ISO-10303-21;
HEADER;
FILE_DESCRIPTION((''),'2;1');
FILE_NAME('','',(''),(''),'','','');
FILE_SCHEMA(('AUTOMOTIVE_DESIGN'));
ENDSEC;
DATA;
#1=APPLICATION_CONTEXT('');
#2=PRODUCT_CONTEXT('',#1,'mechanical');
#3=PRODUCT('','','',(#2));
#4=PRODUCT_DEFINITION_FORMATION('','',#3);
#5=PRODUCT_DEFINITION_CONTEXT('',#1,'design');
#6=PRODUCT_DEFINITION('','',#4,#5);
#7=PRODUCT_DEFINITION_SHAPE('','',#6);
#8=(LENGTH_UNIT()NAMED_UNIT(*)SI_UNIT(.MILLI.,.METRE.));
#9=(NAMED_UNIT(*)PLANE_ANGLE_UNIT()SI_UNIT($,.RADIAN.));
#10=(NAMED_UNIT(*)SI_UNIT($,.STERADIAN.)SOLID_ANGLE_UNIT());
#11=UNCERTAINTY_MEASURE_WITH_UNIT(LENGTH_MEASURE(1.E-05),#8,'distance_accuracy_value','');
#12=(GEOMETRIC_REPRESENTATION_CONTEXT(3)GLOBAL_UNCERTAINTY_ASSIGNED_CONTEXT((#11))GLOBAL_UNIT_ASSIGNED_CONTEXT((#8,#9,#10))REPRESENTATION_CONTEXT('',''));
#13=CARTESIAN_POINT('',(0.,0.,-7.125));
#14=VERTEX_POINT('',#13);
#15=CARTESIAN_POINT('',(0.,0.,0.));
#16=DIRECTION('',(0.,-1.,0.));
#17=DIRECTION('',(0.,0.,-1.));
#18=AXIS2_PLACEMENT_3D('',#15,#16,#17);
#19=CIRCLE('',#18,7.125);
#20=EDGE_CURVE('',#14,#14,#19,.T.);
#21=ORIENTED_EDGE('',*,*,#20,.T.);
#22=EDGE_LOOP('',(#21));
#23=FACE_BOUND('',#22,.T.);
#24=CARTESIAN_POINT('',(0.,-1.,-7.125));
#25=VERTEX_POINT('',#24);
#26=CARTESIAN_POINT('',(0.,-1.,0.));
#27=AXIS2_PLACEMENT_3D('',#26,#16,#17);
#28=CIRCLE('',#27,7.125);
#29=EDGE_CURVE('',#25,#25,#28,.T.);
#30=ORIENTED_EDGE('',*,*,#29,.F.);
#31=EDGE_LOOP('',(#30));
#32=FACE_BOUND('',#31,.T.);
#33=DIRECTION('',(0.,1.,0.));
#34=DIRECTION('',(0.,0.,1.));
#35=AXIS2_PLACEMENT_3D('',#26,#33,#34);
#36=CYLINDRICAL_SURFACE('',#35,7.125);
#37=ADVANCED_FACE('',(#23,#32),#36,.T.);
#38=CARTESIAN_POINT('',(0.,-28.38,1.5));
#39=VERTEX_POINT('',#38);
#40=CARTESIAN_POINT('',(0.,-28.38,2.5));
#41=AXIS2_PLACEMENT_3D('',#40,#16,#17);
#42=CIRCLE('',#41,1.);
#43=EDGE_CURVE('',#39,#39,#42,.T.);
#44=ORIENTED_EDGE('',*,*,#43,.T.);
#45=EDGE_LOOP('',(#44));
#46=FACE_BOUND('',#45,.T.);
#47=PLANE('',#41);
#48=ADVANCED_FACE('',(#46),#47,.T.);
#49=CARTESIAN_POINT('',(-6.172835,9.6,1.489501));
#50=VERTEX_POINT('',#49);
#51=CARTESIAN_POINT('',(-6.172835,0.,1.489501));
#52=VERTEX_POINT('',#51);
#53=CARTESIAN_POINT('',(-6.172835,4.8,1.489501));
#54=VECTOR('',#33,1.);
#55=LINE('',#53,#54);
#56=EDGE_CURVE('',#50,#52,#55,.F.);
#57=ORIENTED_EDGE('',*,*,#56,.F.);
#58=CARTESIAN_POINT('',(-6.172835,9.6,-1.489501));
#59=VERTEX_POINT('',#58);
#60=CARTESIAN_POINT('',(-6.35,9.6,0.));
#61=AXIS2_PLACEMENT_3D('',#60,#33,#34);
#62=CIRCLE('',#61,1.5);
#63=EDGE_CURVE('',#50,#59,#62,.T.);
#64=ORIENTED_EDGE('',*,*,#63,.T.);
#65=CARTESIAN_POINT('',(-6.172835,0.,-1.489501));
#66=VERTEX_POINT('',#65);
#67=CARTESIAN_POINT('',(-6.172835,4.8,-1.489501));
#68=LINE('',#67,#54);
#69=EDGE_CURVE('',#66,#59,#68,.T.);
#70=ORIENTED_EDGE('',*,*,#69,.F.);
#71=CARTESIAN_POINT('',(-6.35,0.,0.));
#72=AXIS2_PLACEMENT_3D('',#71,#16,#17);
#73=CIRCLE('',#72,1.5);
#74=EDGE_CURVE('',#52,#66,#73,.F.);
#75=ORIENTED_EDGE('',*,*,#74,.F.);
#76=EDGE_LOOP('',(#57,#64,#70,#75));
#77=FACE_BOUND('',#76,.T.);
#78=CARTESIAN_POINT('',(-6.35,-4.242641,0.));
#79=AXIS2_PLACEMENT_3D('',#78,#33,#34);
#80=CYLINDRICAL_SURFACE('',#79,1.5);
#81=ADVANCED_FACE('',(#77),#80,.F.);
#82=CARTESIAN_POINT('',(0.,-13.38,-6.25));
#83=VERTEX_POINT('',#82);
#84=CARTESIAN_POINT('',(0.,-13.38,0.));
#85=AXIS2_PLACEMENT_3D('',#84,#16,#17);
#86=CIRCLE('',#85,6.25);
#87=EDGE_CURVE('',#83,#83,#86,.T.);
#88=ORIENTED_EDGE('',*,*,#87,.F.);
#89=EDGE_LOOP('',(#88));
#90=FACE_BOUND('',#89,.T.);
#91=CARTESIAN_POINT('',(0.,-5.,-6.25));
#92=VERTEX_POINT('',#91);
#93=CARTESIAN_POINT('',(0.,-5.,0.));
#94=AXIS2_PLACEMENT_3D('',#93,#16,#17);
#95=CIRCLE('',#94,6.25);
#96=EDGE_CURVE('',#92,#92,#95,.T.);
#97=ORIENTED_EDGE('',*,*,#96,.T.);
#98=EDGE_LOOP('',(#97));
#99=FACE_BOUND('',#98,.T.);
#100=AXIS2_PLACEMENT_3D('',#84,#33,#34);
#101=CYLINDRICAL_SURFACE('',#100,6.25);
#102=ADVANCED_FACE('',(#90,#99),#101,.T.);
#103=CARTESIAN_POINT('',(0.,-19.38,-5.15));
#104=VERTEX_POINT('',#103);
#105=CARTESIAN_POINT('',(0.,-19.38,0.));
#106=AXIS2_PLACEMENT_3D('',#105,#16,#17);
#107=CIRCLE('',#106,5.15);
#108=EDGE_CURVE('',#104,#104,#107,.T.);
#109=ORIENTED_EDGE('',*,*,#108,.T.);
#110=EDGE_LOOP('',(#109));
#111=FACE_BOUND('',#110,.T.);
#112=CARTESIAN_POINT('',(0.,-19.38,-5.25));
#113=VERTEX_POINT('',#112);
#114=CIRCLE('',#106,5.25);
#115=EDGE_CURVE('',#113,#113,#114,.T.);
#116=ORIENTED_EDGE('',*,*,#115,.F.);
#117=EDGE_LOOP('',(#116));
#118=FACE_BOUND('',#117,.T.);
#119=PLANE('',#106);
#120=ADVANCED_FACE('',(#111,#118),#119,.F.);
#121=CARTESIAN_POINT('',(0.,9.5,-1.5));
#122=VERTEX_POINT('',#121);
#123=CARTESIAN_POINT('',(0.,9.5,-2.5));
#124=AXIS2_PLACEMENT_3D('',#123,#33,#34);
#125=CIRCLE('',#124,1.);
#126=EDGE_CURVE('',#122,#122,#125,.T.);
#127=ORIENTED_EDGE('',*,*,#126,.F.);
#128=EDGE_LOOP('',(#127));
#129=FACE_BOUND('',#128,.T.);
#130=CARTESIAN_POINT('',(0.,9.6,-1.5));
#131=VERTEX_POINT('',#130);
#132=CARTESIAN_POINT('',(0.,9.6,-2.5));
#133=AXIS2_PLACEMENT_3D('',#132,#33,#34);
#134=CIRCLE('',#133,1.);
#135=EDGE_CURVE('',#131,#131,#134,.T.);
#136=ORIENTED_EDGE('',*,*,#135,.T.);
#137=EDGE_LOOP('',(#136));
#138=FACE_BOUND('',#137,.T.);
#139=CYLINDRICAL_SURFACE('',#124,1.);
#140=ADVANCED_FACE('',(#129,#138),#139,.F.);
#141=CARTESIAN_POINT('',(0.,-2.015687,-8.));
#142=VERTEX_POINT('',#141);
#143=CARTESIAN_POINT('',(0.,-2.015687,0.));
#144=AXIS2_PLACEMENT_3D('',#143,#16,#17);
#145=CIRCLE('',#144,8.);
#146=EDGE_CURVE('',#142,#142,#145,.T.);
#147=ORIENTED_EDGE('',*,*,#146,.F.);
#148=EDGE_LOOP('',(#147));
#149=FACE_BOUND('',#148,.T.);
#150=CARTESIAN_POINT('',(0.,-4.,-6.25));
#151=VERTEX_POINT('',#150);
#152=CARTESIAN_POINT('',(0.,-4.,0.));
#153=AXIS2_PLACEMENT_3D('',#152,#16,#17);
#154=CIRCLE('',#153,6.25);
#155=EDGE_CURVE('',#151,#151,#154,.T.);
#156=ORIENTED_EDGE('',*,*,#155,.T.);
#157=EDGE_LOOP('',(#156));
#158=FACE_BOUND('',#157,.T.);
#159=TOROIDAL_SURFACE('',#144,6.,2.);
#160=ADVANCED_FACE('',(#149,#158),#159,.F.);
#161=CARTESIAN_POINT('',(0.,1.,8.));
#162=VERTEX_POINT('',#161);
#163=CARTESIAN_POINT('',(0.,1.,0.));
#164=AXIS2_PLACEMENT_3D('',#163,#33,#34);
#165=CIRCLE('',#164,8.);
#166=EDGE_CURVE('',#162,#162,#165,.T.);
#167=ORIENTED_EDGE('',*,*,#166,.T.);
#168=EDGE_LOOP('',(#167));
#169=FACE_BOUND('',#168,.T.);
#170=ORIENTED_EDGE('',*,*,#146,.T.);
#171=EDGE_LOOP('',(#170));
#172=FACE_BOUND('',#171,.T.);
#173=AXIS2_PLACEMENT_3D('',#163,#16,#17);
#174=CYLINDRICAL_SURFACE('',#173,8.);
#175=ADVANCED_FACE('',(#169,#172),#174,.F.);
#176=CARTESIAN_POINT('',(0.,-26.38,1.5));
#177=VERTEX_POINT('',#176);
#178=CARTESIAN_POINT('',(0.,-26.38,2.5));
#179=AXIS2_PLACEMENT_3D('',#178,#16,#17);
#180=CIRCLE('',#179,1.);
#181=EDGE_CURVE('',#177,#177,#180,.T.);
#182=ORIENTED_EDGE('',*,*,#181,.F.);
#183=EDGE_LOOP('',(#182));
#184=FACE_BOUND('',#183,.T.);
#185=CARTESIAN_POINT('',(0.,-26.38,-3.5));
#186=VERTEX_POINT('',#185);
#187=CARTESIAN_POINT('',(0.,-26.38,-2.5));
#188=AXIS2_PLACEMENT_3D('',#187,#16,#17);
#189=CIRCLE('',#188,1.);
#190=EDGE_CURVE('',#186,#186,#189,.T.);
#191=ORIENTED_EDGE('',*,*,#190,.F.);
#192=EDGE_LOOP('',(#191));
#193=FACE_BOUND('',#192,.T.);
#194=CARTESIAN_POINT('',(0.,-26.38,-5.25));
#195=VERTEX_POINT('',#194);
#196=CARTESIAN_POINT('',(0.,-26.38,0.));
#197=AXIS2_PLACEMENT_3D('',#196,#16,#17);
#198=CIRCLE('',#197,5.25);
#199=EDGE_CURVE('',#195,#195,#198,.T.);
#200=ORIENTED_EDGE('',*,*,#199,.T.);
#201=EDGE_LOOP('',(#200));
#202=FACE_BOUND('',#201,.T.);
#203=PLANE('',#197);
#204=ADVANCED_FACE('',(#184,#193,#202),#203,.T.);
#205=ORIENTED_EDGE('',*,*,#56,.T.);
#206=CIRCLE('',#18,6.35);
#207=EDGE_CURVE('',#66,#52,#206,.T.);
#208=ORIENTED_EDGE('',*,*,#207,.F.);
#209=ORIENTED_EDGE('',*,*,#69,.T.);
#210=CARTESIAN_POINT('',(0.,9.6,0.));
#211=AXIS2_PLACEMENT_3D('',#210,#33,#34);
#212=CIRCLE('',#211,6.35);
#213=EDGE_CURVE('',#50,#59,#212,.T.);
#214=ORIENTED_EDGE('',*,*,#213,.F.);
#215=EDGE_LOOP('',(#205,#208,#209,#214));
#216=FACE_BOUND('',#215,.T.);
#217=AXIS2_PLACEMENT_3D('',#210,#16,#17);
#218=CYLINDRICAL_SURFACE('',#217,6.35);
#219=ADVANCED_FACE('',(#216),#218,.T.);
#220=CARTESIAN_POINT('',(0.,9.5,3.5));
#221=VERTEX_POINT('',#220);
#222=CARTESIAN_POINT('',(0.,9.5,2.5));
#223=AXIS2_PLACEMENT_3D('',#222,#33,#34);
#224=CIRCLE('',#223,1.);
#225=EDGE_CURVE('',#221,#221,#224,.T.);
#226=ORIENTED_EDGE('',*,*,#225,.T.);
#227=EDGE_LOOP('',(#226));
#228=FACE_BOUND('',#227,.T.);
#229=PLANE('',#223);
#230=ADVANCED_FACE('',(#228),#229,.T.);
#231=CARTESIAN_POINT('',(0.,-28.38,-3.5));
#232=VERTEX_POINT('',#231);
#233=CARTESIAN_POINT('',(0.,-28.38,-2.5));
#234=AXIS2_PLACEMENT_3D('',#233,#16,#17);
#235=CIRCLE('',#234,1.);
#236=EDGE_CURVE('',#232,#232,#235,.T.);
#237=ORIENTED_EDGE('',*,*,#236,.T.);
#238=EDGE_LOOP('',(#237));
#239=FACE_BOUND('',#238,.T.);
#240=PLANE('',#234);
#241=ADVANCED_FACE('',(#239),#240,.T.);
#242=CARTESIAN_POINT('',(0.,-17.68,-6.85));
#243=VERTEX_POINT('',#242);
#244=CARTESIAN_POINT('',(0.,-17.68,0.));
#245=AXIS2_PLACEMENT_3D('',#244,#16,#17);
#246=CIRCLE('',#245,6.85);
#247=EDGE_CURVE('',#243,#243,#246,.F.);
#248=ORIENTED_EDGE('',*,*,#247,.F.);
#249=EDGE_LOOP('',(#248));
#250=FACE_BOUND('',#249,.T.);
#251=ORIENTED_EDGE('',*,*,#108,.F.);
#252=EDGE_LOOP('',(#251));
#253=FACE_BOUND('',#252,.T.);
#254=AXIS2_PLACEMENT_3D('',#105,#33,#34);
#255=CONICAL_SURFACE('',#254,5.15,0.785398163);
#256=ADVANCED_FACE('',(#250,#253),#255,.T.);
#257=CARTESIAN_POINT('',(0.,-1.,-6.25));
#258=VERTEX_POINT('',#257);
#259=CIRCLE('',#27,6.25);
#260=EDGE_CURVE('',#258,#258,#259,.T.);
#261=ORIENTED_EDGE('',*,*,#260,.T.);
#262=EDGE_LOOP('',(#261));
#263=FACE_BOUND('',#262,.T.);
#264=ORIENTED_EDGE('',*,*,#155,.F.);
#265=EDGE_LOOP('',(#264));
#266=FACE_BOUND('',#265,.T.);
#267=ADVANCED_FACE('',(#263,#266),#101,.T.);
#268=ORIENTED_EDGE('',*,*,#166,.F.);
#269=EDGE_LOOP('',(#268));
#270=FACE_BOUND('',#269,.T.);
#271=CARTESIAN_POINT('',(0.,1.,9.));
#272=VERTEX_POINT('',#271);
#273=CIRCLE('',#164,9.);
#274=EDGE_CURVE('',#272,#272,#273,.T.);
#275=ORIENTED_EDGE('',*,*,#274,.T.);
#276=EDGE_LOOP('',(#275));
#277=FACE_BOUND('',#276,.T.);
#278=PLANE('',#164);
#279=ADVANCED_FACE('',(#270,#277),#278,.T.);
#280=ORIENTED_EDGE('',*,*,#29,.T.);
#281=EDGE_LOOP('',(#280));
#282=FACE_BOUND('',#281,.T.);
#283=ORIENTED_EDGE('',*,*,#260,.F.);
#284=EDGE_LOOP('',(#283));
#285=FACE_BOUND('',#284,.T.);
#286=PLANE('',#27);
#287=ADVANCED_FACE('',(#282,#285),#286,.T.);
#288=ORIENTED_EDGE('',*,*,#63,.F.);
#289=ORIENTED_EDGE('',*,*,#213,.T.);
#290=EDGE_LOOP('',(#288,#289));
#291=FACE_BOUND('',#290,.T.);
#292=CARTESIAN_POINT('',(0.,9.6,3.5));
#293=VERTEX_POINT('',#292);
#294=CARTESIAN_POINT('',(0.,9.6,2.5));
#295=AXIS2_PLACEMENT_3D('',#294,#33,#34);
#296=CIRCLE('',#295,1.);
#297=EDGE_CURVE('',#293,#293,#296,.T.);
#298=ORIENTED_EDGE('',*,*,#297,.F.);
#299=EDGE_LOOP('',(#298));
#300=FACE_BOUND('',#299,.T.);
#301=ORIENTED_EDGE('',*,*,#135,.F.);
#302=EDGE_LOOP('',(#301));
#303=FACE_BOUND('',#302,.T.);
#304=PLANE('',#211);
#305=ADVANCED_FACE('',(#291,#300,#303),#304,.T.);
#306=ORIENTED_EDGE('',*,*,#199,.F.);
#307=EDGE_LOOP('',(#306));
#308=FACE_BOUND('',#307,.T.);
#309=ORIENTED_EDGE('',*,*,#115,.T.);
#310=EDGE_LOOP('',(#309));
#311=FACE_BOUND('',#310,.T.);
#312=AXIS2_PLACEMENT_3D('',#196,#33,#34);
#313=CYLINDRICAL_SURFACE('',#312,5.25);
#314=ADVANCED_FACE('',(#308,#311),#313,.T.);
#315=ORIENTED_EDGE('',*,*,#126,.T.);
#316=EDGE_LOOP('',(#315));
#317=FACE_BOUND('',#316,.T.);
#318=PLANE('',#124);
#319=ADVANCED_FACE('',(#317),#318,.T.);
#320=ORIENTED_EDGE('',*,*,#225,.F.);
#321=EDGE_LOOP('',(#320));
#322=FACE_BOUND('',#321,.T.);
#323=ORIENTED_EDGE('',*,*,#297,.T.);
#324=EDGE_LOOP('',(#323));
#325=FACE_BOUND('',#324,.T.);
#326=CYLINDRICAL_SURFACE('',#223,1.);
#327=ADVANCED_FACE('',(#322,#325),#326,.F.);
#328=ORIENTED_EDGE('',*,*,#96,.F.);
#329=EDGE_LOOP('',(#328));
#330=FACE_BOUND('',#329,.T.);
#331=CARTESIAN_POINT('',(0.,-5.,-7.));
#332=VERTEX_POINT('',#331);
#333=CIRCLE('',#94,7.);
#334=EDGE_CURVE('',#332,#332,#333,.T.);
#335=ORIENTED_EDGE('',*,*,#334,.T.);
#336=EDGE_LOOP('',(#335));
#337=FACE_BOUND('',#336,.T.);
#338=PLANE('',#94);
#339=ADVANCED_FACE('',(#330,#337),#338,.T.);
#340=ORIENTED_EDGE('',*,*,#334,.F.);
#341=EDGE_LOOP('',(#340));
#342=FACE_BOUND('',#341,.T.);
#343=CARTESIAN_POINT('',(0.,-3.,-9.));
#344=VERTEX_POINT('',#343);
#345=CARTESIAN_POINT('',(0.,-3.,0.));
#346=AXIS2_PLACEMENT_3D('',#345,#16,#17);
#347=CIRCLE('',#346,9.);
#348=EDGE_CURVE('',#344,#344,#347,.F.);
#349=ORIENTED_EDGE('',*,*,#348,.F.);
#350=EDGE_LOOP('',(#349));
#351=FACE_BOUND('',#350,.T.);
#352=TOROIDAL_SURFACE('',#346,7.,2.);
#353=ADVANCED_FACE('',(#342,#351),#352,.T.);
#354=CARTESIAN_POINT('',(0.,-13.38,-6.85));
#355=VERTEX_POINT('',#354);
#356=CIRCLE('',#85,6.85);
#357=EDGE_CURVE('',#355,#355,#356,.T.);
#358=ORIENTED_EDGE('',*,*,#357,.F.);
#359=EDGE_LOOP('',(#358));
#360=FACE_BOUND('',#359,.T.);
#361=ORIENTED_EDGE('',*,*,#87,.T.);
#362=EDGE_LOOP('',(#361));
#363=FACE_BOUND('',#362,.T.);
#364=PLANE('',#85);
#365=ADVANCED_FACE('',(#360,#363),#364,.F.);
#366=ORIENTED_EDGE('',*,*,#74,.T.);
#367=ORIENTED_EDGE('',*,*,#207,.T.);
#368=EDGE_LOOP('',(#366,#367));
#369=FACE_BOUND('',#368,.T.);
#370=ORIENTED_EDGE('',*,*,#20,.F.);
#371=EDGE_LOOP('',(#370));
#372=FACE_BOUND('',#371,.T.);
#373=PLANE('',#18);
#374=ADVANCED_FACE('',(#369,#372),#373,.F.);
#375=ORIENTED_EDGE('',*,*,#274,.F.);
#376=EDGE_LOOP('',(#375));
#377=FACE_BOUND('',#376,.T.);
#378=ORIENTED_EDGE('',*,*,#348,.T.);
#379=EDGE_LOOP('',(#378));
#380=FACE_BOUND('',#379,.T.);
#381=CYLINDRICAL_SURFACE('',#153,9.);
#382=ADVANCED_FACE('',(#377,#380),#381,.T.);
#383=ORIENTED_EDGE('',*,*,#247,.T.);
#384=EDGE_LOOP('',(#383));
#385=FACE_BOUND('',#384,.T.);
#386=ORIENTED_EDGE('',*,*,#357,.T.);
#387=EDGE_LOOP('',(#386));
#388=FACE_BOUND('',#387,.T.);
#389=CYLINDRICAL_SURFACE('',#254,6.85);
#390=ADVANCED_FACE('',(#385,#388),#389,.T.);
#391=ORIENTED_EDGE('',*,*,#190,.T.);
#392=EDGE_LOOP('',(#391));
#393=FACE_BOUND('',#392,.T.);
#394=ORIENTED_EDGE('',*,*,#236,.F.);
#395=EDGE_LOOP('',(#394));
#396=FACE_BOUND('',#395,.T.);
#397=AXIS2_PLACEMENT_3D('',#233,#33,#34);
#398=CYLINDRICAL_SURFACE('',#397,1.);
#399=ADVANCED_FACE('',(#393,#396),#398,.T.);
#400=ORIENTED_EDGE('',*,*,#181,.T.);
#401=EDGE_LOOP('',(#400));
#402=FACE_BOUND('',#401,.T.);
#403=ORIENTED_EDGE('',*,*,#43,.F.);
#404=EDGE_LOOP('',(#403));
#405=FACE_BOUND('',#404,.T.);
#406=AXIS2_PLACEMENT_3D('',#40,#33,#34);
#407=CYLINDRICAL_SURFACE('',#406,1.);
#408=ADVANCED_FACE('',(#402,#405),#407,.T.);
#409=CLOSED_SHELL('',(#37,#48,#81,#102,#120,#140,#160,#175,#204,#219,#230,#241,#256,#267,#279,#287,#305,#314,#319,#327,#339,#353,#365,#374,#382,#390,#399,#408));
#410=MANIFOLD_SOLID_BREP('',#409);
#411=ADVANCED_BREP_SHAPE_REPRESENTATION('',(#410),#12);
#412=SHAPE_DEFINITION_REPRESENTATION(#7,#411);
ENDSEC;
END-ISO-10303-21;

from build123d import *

# Parameters (mm, degrees)
SKETCH_1_R          = 6.35
EXTRUDE_1_DEPTH     = 9.6
SKETCH_2_R          = 7.125
EXTRUDE_2_DEPTH     = 1
SKETCH_3_R          = 6.25
EXTRUDE_3_DEPTH     = 12.38
SKETCH_4_R          = 6.85
EXTRUDE_4_DEPTH     = 6
CHAMFER_1_SIZE      = 1.7
SKETCH_5_R          = 5.25
EXTRUDE_5_DEPTH     = 7
SKETCH_6_R          = 9
EXTRUDE_6_DEPTH     = 1
SKETCH_7_R          = 9
SKETCH_7_R_2        = 8
EXTRUDE_7_DEPTH     = 5
FILLET_1_R          = 2
SKETCH_8_R          = 1
EXTRUDE_8_DEPTH     = 2
SKETCH_9_R          = 1.5
CUT_EXTRUDE_1_DEPTH = 9.6
SKETCH_10_R         = 1
CUT_EXTRUDE_2_DEPTH = 0.1


with BuildPart() as part:
    # 草图1 → 凸台-拉伸1 (new body)
    with BuildSketch(Plane(origin=(0, 0, 0), x_dir=(1, 0, 0), z_dir=(0, 1, 0))):
        with Locations(Location((0, 0, 0), (0, 0, 270))):
            Circle(SKETCH_1_R)
    extrude(amount=EXTRUDE_1_DEPTH)

    # 草图2 → 凸台-拉伸2 (add)
    with BuildSketch(Plane(origin=(0, 0, 0), x_dir=(-1, 0, 0), z_dir=(0, -1, 0))):
        with Locations(Location((0, 0, 0), (0, 0, 90))):
            Circle(SKETCH_2_R)
    extrude(amount=EXTRUDE_2_DEPTH)

    # 草图3 → 凸台-拉伸3 (add)
    with BuildSketch(Plane.XZ.offset(1)):
        with Locations(Location((0, 0, 0), (0, 0, 270))):
            Circle(SKETCH_3_R)
    extrude(amount=EXTRUDE_3_DEPTH)

    # 草图4 → 凸台-拉伸4 (add)
    with BuildSketch(Plane.XZ.offset(13.38)):
        with Locations(Location((0, 0, 0), (0, 0, 270))):
            Circle(SKETCH_4_R)
    extrude(amount=EXTRUDE_4_DEPTH)

    # 倒角1
    chamfer_1_edges = [part.edges().sort_by_distance(p)[0] for p in [
        (0, -19.38, 6.85),
    ]]
    chamfer(chamfer_1_edges, length=CHAMFER_1_SIZE)

    # 草图5 → 凸台-拉伸5 (add)
    with BuildSketch(Plane.XZ.offset(19.38)):
        with Locations(Location((0, 0, 0), (0, 0, 270))):
            Circle(SKETCH_5_R)
    extrude(amount=EXTRUDE_5_DEPTH)

    # 草图6 → 凸台-拉伸6 (add)
    with BuildSketch(Plane(origin=(0, -5, 0), x_dir=(-1, 0, 0), z_dir=(0, -1, 0))):
        with Locations(Location((0, 0, 0), (0, 0, 90))):
            Circle(SKETCH_6_R)
    extrude(amount=-EXTRUDE_6_DEPTH)

    # 草图7 → 凸台-拉伸7 (add)
    with BuildSketch(Plane(origin=(0, -4, 0), x_dir=(1, 0, 0), z_dir=(0, 1, 0))):
        with Locations(Location((0, 0, 0), (0, 0, 90))):
            Circle(SKETCH_7_R)
        with Locations(Location((0, 0, 0), (0, 0, 270))):
            Circle(SKETCH_7_R_2, mode=Mode.SUBTRACT)
    extrude(amount=EXTRUDE_7_DEPTH)

    # 圆角1
    # the kernel refuses this fillet: 2 mm, written as the material it adds along each edge
    with BuildSketch(Plane(origin=(0, -4, 0), x_dir=(0, 0, 1), z_dir=(-1, 0, 0))) as fillet_1_piece_1:
        with BuildLine():
            CenterArc((6, 1.984313483), FILLET_1_R, 277.180755781, 82.819244219)
            Line((6.25, 0), (8, 0))
            Line((8, 0), (8, 1.984313483))
        make_face()
    revolve(axis=Axis((0, -4, 0), (0, 1, 0)))
    # the kernel refuses this fillet: 2 mm, written as the material it takes off along each edge
    with BuildSketch(Plane(origin=(0, -5, 0), x_dir=(0, 0, -1), z_dir=(-1, 0, 0))) as fillet_1_2_piece_1:
        with BuildLine():
            CenterArc((9 - FILLET_1_R, -FILLET_1_R), FILLET_1_R, 0, 90)
            Line((9, -FILLET_1_R), (9, 0))
            Line((9, 0), (9 - FILLET_1_R, 0))
        make_face()
    revolve(axis=Axis((0, -5, 0), (0, -1, 0)), mode=Mode.SUBTRACT)

    # 草图8 → 凸台-拉伸8 (add)
    with BuildSketch(Plane.XZ.offset(26.38)):
        with Locations(Location((0, -2.5, 0), (0, 0, 270))):
            Circle(SKETCH_8_R)
        with Locations(Location((0, 2.5, 0), (0, 0, 270))):
            Circle(SKETCH_8_R)
    extrude(amount=EXTRUDE_8_DEPTH)

    # 草图9 → 切除-拉伸1 (cut)
    with BuildSketch(Plane(origin=(0, 9.6, 0), x_dir=(1, 0, 0), z_dir=(0, 1, 0))):
        with Locations((-6.35, 0)):
            Circle(SKETCH_9_R)
    extrude(amount=-CUT_EXTRUDE_1_DEPTH, mode=Mode.SUBTRACT)

    # 草图10 → 切除-拉伸2 (cut)
    with BuildSketch(Plane(origin=(0, 9.6, 0), x_dir=(1, 0, 0), z_dir=(0, 1, 0))):
        with Locations(Location((0, -2.5, 0), (0, 0, 90))):
            Circle(SKETCH_10_R)
        with Locations(Location((0, 2.5, 0), (0, 0, 90))):
            Circle(SKETCH_10_R)
    extrude(amount=-CUT_EXTRUDE_2_DEPTH, mode=Mode.SUBTRACT)


solid = part.part
